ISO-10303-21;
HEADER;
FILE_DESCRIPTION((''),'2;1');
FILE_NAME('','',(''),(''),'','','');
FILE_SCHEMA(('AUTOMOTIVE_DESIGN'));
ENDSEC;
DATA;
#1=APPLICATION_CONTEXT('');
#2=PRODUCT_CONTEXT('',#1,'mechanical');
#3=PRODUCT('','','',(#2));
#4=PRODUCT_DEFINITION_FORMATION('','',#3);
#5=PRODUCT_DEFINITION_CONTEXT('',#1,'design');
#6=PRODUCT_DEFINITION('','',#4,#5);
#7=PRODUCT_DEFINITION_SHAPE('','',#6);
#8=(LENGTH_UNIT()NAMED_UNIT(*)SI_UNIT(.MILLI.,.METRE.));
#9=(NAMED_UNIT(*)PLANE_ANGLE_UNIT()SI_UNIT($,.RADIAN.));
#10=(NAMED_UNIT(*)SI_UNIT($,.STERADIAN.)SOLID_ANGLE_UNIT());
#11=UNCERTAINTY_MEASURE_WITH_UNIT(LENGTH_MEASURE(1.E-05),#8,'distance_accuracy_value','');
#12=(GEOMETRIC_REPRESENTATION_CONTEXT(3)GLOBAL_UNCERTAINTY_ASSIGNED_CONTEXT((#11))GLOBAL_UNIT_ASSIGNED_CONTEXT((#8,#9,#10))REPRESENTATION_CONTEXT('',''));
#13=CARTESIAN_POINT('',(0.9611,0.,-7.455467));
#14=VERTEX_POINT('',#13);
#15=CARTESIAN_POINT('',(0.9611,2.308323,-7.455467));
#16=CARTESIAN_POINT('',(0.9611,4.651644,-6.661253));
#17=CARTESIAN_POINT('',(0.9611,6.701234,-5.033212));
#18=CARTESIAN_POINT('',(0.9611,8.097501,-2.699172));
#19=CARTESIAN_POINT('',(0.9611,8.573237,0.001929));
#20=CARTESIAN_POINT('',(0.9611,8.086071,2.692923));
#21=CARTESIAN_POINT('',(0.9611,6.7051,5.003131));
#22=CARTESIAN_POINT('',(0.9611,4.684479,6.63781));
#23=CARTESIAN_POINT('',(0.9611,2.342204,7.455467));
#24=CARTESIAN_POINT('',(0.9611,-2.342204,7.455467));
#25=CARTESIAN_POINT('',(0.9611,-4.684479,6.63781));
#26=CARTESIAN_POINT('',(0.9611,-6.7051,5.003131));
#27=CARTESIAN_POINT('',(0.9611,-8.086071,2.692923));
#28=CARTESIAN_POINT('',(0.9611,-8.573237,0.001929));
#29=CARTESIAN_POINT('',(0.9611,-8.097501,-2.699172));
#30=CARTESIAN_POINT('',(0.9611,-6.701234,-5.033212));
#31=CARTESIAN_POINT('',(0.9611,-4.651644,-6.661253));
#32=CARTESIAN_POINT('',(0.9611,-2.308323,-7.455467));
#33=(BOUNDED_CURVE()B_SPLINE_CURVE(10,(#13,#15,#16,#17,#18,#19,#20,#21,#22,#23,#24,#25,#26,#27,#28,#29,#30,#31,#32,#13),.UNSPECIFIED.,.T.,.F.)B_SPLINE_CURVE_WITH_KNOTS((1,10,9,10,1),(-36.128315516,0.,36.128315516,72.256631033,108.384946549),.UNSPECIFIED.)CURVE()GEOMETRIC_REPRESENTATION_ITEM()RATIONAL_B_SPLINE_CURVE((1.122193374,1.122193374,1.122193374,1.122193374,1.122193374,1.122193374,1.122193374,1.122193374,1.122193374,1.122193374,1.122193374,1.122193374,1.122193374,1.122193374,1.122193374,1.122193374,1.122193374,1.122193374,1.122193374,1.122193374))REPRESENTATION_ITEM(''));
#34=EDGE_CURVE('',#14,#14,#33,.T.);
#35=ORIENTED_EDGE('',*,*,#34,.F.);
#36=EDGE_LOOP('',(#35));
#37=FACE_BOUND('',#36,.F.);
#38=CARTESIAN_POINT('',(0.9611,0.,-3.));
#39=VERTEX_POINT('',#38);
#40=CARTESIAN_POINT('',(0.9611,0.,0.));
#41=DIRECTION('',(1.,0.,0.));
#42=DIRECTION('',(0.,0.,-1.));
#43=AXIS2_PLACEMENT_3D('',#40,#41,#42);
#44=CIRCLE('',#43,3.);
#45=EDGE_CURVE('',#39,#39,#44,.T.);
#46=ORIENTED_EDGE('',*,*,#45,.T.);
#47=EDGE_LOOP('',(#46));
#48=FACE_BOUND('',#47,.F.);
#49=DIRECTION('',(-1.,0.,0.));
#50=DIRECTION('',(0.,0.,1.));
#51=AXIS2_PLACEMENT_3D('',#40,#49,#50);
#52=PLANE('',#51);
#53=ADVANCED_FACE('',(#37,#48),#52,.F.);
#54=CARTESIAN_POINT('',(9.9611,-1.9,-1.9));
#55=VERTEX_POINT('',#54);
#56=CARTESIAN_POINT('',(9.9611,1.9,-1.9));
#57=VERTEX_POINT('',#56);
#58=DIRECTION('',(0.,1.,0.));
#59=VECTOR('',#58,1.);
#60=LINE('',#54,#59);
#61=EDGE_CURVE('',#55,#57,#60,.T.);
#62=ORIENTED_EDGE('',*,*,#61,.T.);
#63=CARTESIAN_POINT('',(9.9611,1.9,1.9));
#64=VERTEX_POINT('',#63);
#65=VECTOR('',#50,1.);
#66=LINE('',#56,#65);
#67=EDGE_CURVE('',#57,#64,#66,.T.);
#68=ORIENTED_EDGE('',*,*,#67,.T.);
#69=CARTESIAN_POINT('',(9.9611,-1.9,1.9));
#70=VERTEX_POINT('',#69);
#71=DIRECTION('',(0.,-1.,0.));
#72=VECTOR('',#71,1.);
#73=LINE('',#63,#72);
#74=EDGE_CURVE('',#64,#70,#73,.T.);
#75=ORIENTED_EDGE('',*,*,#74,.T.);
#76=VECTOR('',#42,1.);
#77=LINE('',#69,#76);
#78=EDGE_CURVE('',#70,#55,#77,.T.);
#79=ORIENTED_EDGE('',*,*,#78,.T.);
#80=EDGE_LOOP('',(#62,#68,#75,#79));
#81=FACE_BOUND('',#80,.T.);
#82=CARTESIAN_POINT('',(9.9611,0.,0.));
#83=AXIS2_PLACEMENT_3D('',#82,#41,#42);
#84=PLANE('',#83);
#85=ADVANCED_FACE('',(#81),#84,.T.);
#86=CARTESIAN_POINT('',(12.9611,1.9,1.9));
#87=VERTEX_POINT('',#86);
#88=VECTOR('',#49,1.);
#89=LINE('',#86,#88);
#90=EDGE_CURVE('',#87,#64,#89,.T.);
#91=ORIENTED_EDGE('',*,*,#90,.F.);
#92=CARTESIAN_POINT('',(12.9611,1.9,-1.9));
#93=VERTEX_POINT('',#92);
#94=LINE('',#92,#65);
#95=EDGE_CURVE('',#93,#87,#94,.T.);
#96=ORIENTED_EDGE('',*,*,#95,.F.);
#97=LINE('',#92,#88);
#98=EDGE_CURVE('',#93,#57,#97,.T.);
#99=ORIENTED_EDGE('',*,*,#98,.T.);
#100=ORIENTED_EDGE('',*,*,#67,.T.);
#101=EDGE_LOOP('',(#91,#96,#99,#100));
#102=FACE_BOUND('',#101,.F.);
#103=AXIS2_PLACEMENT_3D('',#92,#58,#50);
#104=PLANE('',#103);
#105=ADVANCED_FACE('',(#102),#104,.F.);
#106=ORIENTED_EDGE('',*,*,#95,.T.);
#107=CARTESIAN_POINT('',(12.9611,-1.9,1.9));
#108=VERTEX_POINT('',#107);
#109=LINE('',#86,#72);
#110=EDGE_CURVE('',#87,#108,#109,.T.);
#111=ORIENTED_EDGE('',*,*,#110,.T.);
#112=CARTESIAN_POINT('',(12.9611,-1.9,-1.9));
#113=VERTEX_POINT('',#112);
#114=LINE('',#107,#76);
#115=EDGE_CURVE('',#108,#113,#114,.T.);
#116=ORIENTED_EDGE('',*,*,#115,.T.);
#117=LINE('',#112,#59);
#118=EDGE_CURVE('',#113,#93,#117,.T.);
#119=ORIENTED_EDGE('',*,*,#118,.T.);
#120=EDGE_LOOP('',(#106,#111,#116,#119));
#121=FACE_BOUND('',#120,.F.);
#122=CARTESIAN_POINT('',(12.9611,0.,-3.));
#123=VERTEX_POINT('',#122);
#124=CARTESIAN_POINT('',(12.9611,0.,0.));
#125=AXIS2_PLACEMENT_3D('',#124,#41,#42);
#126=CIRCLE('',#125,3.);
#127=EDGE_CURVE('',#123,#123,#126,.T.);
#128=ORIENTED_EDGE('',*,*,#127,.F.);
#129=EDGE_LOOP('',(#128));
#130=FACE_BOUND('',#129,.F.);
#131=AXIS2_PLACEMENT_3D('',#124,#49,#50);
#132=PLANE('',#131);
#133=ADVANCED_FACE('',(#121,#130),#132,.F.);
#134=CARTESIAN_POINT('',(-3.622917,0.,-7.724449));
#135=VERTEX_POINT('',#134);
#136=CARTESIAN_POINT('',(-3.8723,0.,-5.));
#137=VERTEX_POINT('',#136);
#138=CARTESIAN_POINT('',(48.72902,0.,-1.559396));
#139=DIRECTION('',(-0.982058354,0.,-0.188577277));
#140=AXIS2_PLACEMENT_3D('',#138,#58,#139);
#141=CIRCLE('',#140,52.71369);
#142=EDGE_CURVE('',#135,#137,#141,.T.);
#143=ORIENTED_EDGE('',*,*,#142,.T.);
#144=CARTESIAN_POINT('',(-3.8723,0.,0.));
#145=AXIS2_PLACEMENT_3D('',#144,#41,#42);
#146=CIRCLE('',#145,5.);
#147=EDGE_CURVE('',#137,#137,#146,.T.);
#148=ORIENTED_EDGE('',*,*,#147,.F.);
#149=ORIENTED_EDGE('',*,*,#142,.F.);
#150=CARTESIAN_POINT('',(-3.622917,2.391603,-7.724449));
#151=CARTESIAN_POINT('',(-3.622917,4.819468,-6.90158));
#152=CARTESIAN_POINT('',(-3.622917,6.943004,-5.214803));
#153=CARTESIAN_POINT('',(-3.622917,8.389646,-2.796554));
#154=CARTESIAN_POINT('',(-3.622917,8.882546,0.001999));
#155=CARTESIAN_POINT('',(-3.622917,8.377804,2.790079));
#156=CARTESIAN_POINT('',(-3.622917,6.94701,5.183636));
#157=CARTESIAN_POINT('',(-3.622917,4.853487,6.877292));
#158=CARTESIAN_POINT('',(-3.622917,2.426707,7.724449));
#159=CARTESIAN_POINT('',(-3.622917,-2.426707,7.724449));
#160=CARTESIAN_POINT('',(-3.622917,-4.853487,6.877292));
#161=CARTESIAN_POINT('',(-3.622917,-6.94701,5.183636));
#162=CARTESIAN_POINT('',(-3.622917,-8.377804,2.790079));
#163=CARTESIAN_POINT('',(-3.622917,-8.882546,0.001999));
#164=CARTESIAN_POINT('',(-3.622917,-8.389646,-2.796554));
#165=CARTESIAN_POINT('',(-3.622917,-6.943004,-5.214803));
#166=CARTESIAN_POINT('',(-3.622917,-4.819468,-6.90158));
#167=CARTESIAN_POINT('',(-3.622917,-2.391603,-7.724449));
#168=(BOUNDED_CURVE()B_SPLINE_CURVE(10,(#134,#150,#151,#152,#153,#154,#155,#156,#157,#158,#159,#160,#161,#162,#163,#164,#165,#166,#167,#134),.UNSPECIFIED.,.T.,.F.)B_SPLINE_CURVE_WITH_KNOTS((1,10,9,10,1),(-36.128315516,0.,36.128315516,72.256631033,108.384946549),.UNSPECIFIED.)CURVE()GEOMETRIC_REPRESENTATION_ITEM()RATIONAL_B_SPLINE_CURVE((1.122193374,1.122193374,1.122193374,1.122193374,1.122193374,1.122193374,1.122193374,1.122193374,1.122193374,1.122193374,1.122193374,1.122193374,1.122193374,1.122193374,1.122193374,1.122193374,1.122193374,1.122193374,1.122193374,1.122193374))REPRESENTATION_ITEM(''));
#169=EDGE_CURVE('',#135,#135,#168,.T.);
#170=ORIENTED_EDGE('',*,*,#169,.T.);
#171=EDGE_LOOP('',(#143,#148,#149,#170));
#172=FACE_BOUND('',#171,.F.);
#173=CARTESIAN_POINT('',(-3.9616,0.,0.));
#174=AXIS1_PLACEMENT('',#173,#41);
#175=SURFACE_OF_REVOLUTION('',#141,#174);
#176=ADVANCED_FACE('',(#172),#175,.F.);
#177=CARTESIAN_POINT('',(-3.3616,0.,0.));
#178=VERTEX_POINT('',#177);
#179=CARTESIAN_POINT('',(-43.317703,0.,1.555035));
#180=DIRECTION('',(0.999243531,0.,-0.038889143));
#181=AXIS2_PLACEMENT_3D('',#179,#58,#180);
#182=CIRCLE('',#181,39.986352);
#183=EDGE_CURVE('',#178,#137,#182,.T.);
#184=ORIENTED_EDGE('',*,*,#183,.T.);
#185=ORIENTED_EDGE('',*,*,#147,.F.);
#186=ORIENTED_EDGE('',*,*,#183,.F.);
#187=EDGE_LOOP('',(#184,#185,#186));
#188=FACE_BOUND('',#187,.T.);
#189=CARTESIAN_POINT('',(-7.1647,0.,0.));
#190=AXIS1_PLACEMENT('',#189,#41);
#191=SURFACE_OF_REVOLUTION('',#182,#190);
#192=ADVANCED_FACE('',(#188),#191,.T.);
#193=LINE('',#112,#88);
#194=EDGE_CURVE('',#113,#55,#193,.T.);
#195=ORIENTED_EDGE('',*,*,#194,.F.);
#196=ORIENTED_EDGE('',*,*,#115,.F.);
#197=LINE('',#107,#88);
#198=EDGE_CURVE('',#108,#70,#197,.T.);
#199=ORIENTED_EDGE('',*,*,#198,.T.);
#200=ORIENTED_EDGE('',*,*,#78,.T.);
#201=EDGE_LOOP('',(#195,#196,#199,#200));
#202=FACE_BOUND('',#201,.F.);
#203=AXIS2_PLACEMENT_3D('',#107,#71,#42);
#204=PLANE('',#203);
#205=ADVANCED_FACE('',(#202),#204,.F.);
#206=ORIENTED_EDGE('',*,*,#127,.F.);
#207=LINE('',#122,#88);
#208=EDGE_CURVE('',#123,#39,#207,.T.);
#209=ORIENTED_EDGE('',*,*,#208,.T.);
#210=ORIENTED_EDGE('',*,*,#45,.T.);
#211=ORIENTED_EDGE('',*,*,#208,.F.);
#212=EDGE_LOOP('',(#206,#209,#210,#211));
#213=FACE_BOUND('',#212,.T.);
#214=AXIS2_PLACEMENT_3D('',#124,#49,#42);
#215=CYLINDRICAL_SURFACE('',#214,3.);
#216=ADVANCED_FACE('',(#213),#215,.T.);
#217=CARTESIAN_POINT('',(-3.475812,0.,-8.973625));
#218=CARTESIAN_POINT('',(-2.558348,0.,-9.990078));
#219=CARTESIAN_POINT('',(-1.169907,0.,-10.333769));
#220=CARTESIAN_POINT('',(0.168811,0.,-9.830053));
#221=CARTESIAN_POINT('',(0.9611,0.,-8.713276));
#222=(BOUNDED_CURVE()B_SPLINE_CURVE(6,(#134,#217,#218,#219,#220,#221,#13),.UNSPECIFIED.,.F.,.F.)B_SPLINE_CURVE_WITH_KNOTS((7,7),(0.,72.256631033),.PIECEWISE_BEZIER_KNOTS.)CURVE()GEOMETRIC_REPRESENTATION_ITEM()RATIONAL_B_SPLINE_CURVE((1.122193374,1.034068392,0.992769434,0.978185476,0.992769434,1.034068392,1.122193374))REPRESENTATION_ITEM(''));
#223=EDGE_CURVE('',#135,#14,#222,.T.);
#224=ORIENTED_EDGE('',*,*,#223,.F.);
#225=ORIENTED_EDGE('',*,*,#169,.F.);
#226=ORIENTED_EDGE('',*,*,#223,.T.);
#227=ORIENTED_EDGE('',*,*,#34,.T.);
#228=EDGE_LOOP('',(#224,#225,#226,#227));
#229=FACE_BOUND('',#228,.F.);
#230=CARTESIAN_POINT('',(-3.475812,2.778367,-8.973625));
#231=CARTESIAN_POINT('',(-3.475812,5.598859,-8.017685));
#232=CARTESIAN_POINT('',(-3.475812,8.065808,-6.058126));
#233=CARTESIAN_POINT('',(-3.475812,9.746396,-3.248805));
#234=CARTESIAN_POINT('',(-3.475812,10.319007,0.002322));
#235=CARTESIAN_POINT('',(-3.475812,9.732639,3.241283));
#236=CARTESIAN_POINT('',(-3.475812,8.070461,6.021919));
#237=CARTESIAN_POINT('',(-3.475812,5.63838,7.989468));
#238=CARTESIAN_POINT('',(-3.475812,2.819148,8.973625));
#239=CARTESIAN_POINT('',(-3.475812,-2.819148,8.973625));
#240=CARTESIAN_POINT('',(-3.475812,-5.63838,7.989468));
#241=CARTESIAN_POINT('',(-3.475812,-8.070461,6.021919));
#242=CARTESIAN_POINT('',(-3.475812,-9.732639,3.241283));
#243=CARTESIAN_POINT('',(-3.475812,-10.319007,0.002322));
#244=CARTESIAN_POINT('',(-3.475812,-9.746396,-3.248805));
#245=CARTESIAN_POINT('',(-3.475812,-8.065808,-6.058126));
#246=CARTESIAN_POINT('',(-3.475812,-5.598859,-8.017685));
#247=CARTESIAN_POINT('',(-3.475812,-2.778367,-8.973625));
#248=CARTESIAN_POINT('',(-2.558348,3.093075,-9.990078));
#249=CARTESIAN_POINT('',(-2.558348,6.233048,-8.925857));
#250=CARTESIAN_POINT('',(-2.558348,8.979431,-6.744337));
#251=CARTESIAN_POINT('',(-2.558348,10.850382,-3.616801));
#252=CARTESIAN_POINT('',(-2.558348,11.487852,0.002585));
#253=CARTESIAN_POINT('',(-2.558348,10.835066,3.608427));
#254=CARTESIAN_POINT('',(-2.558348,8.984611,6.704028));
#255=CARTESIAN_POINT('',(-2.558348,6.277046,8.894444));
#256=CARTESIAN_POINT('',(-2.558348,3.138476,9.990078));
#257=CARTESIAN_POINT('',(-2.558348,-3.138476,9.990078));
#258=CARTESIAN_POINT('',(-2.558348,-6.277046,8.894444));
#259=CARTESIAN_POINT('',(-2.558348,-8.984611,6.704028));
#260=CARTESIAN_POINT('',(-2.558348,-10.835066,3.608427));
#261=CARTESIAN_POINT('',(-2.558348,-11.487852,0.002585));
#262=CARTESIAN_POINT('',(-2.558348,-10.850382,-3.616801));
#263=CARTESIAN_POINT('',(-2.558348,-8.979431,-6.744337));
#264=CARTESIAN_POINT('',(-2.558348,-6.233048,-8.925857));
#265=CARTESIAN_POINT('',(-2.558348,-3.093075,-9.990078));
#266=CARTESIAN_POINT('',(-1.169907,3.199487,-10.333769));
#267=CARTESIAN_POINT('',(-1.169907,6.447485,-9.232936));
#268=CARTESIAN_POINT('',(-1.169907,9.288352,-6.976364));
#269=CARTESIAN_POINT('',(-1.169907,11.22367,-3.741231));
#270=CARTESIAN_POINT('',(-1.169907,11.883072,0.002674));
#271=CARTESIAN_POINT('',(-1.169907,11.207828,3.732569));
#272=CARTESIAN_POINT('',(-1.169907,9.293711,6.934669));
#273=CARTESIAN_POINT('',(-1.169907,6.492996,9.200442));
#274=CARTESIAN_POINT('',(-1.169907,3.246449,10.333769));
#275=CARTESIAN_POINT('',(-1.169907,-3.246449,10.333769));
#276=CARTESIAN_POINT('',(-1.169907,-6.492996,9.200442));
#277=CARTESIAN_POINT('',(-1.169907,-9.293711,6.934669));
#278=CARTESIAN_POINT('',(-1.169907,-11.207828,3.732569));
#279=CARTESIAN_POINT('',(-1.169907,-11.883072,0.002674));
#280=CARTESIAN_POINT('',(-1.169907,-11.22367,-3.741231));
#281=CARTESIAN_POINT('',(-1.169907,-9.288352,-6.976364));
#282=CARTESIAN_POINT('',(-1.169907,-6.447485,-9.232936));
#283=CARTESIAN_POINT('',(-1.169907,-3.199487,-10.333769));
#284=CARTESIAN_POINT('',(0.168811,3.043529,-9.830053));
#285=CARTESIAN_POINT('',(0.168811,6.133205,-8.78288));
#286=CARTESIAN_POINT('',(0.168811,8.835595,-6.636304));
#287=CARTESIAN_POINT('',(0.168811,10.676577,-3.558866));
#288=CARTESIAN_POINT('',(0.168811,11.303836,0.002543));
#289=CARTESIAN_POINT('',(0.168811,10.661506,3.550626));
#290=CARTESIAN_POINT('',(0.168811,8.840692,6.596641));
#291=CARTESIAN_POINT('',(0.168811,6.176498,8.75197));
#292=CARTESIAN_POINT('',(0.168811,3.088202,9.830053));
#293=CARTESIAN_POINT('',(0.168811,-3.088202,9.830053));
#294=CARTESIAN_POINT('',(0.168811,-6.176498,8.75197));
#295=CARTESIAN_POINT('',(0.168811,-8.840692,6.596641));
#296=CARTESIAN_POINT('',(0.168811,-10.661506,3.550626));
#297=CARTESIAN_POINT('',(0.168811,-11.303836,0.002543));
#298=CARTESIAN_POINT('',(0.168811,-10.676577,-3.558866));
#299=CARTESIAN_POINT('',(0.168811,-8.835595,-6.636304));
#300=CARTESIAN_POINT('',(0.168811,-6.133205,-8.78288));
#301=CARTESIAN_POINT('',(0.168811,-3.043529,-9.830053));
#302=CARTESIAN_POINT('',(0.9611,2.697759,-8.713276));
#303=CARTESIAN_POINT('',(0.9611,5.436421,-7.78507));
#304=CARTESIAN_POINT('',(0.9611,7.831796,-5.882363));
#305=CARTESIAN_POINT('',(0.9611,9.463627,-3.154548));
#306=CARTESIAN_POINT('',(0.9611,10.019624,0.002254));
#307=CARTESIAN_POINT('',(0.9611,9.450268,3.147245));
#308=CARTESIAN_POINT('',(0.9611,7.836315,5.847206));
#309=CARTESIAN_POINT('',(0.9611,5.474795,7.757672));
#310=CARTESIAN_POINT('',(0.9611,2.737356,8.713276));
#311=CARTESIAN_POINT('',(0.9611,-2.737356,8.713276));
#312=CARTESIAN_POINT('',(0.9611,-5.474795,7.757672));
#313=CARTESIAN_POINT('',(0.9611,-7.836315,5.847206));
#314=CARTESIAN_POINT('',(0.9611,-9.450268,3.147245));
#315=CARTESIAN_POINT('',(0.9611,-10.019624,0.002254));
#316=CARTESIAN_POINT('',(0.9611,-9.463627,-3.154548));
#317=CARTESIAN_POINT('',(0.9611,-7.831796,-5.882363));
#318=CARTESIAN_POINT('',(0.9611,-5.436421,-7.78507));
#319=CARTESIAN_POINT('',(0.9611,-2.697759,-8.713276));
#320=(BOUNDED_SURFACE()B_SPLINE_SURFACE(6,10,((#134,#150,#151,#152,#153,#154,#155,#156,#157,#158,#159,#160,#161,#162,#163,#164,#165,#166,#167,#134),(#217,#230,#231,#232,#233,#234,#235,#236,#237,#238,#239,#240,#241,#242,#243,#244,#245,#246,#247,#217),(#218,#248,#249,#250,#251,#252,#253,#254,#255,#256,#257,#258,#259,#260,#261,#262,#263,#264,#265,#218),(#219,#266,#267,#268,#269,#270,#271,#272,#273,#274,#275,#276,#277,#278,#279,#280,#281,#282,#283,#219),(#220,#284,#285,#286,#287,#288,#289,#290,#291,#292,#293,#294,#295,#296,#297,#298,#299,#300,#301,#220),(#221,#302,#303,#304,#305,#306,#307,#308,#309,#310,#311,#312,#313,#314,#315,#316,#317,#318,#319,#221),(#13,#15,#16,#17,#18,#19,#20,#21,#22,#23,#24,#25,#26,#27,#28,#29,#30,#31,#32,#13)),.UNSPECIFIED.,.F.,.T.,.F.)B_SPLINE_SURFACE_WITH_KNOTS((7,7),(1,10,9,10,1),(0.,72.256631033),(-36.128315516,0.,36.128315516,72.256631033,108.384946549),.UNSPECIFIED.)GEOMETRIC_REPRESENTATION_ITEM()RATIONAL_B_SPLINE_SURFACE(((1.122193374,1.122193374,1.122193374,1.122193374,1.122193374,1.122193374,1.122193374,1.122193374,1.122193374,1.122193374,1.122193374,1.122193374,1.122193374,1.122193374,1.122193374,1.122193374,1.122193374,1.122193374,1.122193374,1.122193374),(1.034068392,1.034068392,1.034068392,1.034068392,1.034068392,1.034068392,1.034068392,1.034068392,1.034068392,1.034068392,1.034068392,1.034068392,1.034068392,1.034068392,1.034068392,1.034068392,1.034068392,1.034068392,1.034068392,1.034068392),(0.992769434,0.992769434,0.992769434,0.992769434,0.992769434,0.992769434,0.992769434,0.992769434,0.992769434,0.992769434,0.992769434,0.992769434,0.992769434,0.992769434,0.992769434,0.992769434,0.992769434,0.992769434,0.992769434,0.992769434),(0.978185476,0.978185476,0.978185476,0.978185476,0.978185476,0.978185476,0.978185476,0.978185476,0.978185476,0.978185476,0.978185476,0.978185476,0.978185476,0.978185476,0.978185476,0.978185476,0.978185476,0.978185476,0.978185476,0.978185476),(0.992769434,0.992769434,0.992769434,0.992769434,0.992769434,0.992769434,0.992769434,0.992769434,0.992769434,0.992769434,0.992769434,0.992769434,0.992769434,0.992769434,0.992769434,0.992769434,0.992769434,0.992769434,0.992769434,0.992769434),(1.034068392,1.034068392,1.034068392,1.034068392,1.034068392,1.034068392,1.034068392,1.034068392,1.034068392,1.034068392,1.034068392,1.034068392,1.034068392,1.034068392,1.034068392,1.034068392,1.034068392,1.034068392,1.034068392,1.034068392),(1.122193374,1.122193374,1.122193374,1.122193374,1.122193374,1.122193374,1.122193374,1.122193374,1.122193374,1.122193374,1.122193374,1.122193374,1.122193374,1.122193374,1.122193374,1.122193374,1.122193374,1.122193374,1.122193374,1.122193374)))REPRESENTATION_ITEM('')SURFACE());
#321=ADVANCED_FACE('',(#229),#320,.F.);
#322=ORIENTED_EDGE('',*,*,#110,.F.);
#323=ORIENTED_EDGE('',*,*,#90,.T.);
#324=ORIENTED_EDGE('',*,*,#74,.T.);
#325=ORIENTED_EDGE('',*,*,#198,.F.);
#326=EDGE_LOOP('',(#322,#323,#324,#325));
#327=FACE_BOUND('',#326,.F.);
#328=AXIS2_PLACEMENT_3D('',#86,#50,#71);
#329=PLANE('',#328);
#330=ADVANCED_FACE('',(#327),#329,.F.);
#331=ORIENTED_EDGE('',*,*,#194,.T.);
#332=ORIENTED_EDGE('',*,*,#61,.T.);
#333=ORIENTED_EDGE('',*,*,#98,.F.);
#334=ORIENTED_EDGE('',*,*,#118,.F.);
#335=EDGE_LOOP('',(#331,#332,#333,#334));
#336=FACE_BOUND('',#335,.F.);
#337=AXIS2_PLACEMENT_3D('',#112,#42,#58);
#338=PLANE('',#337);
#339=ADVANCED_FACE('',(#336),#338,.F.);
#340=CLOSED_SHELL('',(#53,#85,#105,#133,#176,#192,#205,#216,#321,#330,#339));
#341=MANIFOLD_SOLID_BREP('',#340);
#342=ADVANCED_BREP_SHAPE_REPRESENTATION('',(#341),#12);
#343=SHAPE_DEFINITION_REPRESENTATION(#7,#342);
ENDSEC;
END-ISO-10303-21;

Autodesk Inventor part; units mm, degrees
ref_plane "YZ Plane" through (0, 0, 0) normal (1, 0, 0) x (0, 1, 0)
ref_plane "XZ Plane" through (0, 0, 0) normal (0, 1, 0) x (-1, 0, 0)
ref_plane "XY Plane" through (0, 0, 0) normal (0, 0, 1) x (1, 0, 0)
sketch "Sketch1" plane through (0, 0, 0) normal (0, 1, 0) x (-1, 0, 0)
  line L0 (3.9616, 0) -> (-12.9611, 0)
  line L1 (-12.9611, 0) -> (-12.9611, -3)
  line L2 (-12.9611, -3) -> (-0.9611, -3)
  line L3 (-12.9611, -3) -> (-0.9611, -3) construction
  line L4 (-0.9611, -3) -> (-0.9611, -11.5)
  line L5 (-0.9611, -11.5) -> (3.0389, -11.5)
  arc A0 (3.0389, -11.5) -> (3.9616, 0) centre (-48.7312, -1.5591) ccw
  line L6 (61.7439, 0) -> (-67.1437, 0) projected
  arc A1 (3.3616, 0) -> (3.8723, -5) centre (43.3314, 1.556) ccw
  line L7 (3.8723, -5) -> (7.1647, 0)
  line L8 (7.1647, 0) -> (3.3616, 0)
  point P0 (0, 0)
  dimension "d1" = 3
  dimension "d2" = 90
  dimension "d3" = 12
  dimension "d5" = 8.5
  dimension "d6" = 4
  dimension "d11" = 0
  dimension "d14" = 0.6
  dimension "d16" = 5
  dimension "d17" = 40
revolve "Revolution1" add sketch "Sketch1" angle 360 about axis through (-10, 0, 0) along (1, 0, 0) contours A0 A1 L0 | A1 A0 L5 L4 L2 L1 L0
fillet "Fillet1" radius 2.3 2 edges at (-3.0389, 0, 11.5) (0.9611, 0, 11.5)
sketch "Sketch2" plane through (12.9611, 0, 0) normal (1, 0, 0) x (0, 0, -1)
  circle A0 centre (0, 0) radius 3 projected
  line L0 (1.9, 1.9) -> (-1.9, 1.9)
  line L1 (-1.9, 1.9) -> (-1.9, -1.9)
  line L2 (-1.9, -1.9) -> (1.9, -1.9)
  line L3 (1.9, -1.9) -> (1.9, 1.9)
  line L4 (1.9, 1.9) -> (-1.9, -1.9) construction
  line L5 (-1.9, 1.9) -> (1.9, -1.9) construction
  dimension "d9" = 3.8
  dimension "d10" = 3.8
extrude "Extrusion1" cut sketch "Sketch2" against normal blind 3 contours L3 L2 L1 L0
revolve "Revolution2" cut sketch "Sketch1" angle 360 about axis through (-10, 0, 0) along (1, 0, 0) contours A0 A1 L0 | L6 L7 A0
properties part number "joystick_nibble"
